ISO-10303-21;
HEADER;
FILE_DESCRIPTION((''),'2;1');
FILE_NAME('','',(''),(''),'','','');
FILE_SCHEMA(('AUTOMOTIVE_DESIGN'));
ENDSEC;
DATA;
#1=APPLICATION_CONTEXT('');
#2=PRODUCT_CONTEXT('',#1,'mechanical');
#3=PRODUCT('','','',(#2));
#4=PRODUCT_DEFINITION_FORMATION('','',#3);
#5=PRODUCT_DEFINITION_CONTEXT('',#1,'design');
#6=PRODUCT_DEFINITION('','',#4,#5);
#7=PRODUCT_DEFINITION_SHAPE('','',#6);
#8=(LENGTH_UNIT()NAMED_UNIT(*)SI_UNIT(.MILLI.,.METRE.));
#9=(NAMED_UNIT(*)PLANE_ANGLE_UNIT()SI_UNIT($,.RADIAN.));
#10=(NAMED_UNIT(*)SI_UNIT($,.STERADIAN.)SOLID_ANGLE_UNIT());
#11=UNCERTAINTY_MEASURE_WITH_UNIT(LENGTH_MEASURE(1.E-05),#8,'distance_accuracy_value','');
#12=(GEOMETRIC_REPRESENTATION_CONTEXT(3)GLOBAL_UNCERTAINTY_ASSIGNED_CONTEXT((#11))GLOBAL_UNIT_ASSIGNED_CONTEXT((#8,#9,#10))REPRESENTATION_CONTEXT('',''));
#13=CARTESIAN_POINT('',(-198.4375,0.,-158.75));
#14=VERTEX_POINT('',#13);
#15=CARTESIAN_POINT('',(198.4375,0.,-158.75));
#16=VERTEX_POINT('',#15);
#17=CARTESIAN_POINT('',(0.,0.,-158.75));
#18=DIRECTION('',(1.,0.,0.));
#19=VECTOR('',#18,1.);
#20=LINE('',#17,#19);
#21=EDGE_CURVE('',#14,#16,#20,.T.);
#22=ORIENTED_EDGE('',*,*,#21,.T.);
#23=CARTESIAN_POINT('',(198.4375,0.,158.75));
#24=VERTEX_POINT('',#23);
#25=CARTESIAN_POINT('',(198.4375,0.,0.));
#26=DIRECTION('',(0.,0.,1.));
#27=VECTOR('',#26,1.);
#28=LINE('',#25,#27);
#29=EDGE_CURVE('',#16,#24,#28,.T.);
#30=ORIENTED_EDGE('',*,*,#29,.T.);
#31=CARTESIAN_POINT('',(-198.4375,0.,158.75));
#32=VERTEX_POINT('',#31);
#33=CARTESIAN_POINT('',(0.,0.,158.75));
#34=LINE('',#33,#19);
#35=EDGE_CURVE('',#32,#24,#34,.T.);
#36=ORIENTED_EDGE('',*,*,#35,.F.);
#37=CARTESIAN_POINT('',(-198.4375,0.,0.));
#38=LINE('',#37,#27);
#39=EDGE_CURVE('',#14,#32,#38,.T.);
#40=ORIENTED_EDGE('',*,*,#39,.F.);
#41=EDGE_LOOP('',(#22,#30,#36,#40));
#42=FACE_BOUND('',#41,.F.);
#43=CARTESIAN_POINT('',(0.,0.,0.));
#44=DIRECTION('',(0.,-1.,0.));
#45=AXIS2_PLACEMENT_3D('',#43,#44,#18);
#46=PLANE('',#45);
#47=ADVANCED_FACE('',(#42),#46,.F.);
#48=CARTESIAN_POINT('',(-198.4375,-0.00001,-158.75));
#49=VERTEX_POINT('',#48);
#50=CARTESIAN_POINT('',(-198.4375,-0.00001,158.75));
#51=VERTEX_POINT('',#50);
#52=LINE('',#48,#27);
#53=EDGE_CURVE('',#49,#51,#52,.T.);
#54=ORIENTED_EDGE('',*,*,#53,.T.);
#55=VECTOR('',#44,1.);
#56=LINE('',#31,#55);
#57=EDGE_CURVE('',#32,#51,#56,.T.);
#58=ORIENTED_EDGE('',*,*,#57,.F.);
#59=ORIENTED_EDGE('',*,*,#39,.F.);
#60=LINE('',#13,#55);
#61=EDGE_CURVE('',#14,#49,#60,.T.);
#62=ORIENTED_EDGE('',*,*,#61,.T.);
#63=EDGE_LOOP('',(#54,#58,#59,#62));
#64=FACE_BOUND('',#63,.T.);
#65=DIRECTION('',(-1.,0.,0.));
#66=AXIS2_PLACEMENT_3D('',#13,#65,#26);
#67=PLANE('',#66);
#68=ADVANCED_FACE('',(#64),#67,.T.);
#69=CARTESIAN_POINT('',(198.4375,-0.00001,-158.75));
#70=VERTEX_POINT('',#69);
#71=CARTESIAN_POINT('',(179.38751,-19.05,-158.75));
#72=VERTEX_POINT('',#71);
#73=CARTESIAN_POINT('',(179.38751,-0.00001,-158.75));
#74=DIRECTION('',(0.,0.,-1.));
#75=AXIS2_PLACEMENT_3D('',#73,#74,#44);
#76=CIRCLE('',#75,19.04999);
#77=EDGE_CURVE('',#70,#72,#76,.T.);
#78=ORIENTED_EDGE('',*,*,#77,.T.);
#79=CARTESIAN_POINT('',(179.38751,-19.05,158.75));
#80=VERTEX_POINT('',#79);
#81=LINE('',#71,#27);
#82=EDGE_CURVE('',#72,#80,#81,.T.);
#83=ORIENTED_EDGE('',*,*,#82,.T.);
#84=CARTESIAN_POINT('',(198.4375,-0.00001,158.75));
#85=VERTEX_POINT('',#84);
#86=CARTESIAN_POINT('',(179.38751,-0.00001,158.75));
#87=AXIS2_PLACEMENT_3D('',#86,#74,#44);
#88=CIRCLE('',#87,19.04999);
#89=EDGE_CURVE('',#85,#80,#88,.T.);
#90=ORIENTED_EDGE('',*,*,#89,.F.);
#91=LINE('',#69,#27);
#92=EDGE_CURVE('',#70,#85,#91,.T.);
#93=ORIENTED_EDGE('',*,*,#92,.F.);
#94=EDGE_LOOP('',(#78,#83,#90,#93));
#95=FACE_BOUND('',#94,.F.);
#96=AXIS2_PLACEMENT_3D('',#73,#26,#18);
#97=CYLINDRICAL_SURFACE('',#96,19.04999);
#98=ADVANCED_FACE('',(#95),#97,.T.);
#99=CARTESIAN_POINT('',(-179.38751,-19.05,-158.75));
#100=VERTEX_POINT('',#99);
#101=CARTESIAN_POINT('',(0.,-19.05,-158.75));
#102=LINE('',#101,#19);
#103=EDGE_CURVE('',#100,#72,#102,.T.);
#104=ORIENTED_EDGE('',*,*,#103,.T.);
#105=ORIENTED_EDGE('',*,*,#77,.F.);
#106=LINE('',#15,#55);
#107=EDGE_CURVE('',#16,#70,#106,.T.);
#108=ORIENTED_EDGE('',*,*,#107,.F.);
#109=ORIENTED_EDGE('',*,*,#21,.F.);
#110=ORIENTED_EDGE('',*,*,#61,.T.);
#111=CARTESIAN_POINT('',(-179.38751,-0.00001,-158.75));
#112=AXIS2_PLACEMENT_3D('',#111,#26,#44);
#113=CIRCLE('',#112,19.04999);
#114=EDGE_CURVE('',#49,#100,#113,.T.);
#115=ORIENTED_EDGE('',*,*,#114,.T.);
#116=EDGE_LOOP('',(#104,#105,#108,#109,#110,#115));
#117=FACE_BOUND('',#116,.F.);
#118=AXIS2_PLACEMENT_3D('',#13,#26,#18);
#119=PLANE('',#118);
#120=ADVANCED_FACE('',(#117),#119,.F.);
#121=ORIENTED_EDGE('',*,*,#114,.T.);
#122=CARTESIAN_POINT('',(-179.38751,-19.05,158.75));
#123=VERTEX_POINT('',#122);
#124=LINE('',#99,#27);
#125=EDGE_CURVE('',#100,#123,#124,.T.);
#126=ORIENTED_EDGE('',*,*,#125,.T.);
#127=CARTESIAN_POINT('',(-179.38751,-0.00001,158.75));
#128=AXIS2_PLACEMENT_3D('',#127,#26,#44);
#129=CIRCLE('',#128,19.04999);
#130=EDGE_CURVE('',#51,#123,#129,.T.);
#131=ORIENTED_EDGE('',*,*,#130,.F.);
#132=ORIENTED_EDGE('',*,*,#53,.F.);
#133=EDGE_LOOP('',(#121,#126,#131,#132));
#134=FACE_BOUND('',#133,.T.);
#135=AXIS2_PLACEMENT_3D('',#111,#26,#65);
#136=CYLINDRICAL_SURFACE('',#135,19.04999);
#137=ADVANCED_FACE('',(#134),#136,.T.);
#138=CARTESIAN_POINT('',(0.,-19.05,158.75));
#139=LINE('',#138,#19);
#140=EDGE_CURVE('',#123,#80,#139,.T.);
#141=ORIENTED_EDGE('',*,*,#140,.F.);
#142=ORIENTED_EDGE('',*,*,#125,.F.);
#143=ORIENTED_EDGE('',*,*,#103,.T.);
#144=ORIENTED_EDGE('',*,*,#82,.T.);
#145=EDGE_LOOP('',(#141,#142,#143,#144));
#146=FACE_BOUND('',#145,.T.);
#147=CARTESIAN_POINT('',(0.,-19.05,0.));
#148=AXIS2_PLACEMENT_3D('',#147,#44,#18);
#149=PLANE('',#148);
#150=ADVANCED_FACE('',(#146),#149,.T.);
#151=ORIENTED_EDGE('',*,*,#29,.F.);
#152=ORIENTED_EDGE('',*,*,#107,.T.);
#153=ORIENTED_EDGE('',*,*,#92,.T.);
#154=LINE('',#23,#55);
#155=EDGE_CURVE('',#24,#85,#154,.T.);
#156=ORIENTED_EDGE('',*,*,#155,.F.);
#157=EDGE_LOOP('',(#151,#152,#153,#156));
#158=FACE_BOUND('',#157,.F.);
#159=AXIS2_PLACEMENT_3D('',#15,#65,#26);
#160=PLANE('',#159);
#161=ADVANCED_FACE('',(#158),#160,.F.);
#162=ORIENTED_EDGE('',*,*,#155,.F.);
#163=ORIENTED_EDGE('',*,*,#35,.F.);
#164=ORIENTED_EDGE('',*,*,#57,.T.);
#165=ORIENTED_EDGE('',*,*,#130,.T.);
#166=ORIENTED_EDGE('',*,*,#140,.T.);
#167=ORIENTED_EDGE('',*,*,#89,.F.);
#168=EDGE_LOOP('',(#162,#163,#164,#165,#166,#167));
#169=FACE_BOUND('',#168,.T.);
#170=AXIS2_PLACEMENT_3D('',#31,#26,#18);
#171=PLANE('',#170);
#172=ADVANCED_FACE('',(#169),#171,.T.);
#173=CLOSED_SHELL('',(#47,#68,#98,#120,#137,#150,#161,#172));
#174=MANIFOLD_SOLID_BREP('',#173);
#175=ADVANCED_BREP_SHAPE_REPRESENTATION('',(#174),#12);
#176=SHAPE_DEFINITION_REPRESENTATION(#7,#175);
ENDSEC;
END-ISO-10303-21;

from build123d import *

# Parameters (mm, degrees)
F0_W     = 396.875
F0_H     = 317.5
F1_DEPTH = 19.05
F2_R     = 19.04999


# Not quite as in the source:
# - a fillet or chamfer is up to 0.001 mm smaller than in the source, because OpenCascade refuses the exact size


with BuildPart() as f1:
    # F0 (on Front) → F1 (new body)
    with BuildSketch(Plane.XZ):
        Rectangle(F0_W, F0_H)
    extrude(amount=F1_DEPTH)

    # F2 (radius 19.05 in the source; OpenCascade refuses exactly that, so slightly less here)
    f2_edges = [f1.edges().sort_by_distance(p)[0] for p in [
        (-198.4375, -19.05, 0),
        (198.4375, -19.05, 0),
    ]]
    fillet(f2_edges, radius=F2_R)


solid = f1.part
